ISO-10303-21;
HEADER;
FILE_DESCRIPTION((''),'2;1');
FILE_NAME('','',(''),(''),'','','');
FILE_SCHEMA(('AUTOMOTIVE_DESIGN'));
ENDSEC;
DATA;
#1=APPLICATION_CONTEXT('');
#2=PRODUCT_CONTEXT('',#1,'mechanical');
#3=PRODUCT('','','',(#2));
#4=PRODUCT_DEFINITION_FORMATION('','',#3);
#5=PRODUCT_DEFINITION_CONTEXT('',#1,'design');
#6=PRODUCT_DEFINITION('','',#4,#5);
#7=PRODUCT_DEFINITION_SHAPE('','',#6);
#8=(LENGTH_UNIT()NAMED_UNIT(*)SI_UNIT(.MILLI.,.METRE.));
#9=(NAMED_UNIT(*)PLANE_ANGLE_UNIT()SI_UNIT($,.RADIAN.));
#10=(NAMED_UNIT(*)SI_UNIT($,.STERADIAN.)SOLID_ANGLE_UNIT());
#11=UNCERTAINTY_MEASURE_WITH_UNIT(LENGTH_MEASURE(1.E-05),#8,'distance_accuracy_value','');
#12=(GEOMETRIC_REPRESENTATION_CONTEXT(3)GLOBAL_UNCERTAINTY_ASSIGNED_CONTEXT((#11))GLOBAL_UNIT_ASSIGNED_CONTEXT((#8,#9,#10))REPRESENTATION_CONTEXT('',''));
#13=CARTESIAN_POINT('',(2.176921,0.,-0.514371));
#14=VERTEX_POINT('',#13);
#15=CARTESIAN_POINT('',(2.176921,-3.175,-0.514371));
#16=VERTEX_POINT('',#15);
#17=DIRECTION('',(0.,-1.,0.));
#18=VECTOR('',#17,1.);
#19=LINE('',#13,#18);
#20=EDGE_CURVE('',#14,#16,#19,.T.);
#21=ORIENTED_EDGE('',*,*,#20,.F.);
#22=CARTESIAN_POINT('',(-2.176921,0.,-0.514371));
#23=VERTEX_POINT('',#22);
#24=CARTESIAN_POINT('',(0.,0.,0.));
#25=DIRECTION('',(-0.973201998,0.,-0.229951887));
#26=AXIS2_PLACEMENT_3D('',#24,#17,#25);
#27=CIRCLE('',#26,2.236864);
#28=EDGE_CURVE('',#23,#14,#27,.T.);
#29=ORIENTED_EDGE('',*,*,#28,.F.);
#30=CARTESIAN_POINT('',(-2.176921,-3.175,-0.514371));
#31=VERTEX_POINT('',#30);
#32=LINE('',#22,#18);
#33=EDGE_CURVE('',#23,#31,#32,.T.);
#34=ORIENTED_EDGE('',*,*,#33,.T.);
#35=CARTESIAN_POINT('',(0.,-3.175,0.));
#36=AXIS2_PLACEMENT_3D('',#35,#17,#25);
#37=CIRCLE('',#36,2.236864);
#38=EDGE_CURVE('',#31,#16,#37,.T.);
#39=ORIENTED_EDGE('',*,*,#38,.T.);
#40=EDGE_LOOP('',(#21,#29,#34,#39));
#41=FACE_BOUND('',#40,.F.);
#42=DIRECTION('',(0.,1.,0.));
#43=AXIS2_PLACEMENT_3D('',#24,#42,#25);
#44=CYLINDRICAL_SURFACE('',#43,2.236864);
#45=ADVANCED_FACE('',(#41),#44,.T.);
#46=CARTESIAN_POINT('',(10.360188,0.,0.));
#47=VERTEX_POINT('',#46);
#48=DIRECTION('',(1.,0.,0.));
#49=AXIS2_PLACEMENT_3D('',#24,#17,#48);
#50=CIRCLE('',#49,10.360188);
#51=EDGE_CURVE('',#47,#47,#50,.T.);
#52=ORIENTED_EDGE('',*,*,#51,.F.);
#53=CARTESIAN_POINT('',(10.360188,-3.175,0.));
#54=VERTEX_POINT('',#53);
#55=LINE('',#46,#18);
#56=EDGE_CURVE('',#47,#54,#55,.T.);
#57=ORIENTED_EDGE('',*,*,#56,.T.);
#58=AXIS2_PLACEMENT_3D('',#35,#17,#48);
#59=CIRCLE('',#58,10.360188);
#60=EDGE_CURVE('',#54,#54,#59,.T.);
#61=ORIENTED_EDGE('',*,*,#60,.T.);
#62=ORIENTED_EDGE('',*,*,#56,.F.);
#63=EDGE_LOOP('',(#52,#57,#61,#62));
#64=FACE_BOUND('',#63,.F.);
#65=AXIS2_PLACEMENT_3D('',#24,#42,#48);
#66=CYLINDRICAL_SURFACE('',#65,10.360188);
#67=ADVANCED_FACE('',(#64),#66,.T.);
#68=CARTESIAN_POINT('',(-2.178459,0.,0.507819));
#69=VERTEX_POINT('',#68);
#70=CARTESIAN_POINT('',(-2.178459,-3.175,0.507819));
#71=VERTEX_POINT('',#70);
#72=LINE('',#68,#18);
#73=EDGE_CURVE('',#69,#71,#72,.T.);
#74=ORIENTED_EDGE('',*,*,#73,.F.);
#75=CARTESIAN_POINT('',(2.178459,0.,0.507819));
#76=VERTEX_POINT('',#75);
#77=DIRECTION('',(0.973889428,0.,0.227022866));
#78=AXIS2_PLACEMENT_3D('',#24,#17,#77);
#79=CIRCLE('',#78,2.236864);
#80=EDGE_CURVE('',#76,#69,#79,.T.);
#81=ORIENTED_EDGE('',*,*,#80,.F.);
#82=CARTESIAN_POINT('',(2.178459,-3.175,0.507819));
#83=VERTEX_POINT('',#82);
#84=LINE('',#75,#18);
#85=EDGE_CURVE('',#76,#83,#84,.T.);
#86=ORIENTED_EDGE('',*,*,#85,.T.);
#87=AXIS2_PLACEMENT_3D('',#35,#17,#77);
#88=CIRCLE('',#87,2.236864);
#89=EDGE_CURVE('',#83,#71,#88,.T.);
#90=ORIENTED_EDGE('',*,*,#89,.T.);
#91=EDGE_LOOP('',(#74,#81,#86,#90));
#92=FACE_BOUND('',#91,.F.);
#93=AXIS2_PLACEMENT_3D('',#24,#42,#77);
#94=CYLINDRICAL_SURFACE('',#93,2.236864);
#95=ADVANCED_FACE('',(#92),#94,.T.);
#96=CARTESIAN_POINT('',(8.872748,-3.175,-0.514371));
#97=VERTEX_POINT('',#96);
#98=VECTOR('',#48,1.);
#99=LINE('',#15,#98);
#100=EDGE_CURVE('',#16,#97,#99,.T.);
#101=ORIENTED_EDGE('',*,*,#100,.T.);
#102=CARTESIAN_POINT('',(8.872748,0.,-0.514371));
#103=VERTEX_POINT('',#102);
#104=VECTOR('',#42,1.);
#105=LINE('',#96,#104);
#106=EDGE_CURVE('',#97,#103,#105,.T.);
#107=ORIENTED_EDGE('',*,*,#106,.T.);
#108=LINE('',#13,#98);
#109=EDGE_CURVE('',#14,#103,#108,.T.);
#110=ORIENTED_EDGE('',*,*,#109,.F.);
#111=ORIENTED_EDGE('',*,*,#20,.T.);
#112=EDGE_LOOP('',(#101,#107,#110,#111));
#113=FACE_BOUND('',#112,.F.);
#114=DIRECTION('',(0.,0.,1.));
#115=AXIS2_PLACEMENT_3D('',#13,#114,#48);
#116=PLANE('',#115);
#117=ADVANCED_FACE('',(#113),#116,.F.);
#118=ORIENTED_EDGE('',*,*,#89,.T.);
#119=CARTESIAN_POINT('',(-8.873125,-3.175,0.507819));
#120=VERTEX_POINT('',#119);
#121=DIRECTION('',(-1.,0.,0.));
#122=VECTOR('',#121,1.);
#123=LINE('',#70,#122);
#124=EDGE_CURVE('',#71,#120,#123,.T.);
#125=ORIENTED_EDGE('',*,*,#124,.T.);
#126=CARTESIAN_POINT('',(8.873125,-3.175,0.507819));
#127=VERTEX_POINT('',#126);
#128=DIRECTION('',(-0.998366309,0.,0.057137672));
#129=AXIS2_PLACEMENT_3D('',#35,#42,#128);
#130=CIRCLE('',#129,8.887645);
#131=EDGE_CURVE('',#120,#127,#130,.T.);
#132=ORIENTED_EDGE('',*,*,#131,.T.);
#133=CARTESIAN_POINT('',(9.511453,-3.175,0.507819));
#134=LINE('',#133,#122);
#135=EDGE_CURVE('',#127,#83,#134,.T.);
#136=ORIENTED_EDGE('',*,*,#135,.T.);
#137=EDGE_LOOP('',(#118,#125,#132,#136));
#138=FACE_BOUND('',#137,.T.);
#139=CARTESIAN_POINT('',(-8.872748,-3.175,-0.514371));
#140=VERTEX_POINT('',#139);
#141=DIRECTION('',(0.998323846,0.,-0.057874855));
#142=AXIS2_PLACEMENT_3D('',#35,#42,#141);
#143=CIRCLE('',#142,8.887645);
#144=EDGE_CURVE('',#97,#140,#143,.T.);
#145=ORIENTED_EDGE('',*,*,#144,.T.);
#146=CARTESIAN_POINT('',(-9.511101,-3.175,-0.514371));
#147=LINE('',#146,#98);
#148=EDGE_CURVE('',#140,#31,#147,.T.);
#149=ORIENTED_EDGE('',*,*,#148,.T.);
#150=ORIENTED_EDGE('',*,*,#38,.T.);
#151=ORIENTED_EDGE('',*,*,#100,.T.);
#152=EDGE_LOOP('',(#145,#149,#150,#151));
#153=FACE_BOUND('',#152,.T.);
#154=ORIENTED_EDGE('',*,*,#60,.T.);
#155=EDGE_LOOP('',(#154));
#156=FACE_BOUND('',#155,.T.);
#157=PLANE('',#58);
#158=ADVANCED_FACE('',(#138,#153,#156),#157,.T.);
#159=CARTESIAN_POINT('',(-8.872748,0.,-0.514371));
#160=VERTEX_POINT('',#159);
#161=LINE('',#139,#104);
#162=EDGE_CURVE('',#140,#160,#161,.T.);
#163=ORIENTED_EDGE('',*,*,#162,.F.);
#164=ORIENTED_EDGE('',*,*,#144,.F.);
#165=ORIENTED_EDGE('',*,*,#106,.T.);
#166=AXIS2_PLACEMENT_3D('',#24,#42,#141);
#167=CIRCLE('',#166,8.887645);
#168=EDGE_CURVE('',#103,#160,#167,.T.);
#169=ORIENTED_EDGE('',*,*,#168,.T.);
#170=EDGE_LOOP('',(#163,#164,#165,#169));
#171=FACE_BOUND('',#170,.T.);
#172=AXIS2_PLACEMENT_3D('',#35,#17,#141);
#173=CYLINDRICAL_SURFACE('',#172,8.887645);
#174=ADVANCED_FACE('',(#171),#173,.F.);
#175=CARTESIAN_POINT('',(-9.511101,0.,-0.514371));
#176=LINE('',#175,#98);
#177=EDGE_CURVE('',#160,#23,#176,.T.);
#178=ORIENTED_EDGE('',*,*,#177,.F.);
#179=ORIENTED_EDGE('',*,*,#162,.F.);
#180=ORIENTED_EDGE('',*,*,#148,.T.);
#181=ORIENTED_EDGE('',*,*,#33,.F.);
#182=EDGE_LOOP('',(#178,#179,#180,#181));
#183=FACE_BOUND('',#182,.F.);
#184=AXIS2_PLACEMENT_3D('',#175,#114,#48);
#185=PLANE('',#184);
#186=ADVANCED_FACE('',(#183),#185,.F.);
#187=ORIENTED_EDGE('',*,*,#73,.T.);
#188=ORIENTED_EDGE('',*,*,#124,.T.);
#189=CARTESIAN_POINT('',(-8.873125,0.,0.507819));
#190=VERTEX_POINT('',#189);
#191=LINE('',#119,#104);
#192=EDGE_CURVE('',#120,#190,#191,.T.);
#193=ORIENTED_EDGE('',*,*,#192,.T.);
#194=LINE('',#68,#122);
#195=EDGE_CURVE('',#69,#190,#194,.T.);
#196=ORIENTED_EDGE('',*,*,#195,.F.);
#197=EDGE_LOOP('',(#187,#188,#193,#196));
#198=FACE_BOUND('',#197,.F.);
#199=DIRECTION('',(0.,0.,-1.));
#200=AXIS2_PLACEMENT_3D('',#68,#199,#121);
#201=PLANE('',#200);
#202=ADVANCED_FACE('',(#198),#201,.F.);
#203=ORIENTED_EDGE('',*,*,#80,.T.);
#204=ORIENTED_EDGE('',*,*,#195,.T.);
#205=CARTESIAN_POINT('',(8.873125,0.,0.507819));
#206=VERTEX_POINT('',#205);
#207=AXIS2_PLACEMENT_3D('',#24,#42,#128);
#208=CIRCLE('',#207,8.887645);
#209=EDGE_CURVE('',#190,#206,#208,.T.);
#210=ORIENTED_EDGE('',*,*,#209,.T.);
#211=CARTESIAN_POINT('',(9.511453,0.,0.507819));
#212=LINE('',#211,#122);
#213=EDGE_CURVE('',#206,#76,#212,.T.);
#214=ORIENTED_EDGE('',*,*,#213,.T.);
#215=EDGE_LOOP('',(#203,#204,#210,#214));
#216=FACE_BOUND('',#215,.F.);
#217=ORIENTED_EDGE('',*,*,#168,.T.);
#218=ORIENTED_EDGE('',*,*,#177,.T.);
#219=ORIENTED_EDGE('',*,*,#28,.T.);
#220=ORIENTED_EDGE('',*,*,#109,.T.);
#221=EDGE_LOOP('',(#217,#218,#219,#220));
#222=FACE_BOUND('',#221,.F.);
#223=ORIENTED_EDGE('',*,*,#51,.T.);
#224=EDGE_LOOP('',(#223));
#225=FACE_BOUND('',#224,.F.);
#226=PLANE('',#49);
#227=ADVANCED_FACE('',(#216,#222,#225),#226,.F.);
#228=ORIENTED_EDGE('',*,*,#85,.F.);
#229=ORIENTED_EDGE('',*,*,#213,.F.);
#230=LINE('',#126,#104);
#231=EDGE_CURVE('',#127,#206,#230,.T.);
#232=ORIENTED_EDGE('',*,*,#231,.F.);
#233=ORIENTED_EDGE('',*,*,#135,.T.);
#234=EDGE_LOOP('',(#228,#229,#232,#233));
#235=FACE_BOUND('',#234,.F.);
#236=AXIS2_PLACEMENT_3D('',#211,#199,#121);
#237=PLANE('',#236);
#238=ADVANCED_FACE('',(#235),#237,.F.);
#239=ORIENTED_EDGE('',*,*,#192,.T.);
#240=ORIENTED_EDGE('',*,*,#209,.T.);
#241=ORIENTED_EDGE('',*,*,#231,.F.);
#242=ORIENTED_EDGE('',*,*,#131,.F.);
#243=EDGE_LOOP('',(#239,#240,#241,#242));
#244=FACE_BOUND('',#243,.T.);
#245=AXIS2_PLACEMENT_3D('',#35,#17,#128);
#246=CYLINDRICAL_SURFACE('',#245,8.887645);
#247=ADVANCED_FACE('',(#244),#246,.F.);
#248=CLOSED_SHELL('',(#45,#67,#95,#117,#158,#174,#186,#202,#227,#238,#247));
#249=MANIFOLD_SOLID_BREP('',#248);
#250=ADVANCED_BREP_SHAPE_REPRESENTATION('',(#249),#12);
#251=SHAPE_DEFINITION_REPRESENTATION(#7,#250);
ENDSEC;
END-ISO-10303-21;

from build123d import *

# Parameters (mm, degrees)
F0_R     = 10.3601879012
F1_DEPTH = 3.175
F2_R     = 10.3601879012
F3_DEPTH = 3.175


with BuildPart() as f1:
    # F0 (on Front) → F1 (new body)
    with BuildSketch(Plane.XZ):
        Circle(F0_R)
        with BuildLine():
            ThreePointArc((9.5114533333, 0.5078193457), (9.521612731, 0.254), (9.525, 0))
            ThreePointArc((9.525, 0), (9.5215246826, -0.2572794566), (9.5111012664, -0.5143711699))
            ThreePointArc((9.5111012664, -0.5143711699), (0, -9.525), (-9.5111012664, -0.5143711699))
            ThreePointArc((-9.5111012664, -0.5143711699), (-9.524999435, -0.0032806383), (-9.5114533333, 0.5078193457))
            ThreePointArc((-9.5114533333, 0.5078193457), (0, 9.525), (9.5114533333, 0.5078193457))
        make_face(mode=Mode.SUBTRACT)
        with BuildLine():
            Line((-2.1784585047, 0.5078193457), (-9.5114533333, 0.5078193457))
            ThreePointArc((-9.5114533333, 0.5078193457), (-9.524999435, -0.0032806383), (-9.5111012664, -0.5143711699))
            Line((-9.5111012664, -0.5143711699), (-2.1769208171, -0.5143711699))
            ThreePointArc((-2.1769208171, -0.5143711699), (-2.2368617797, -0.0033649251), (-2.1784585047, 0.5078193457))
        make_face()
        with BuildLine():
            ThreePointArc((2.2368643107, 0), (2.222214889, 0.2555835118), (2.1784585047, 0.5078193457))
            ThreePointArc((2.1784585047, 0.5078193457), (0, 2.2368643107), (-2.1784585047, 0.5078193457))
            ThreePointArc((-2.1784585047, 0.5078193457), (-2.2368617797, -0.0033649251), (-2.1769208171, -0.5143711699))
            ThreePointArc((-2.1769208171, -0.5143711699), (0, -2.2368643107), (2.1769208171, -0.5143711699))
            ThreePointArc((2.1769208171, -0.5143711699), (2.2218278992, -0.2589261105), (2.2368643107, 0))
        make_face()
        with BuildLine():
            ThreePointArc((9.5111012664, -0.5143711699), (9.5215246826, -0.2572794566), (9.525, 0))
            ThreePointArc((9.525, 0), (9.521612731, 0.254), (9.5114533333, 0.5078193457))
            Line((9.5114533333, 0.5078193457), (2.1784585047, 0.5078193457))
            ThreePointArc((2.1784585047, 0.5078193457), (2.222214889, 0.2555835118), (2.2368643107, 0))
            ThreePointArc((2.2368643107, 0), (2.2218278992, -0.2589261105), (2.1769208171, -0.5143711699))
            Line((2.1769208171, -0.5143711699), (9.5111012664, -0.5143711699))
        make_face()
    extrude(amount=F1_DEPTH)

    # F2 (on face) → F3 (join)
    with BuildSketch(Plane.XZ.offset(3.175)):
        Circle(F2_R)
        with BuildLine():
            ThreePointArc((8.8731253784, 0.5078193457), (8.8840143878, 0.2540134389), (8.8876450463, 0))
            ThreePointArc((8.8876450463, 0), (8.8839199998, -0.2572934234), (8.872747983, -0.5143711699))
            Line((8.872747983, -0.5143711699), (9.5111012664, -0.5143711699))
            ThreePointArc((9.5111012664, -0.5143711699), (0, -9.525), (-9.5111012664, -0.5143711699))
            Line((-9.5111012664, -0.5143711699), (-8.872747983, -0.5143711699))
            ThreePointArc((-8.872747983, -0.5143711699), (-8.8876444406, -0.0032813423), (-8.8731253784, 0.5078193457))
            Line((-8.8731253784, 0.5078193457), (-9.5114533333, 0.5078193457))
            ThreePointArc((-9.5114533333, 0.5078193457), (0, 9.525), (9.5114533333, 0.5078193457))
            Line((9.5114533333, 0.5078193457), (8.8731253784, 0.5078193457))
        make_face(mode=Mode.SUBTRACT)
        with BuildLine():
            ThreePointArc((-8.8731253784, 0.5078193457), (0, 8.8876450463), (8.8731253784, 0.5078193457))
            Line((8.8731253784, 0.5078193457), (9.5114533333, 0.5078193457))
            ThreePointArc((9.5114533333, 0.5078193457), (0, 9.525), (-9.5114533333, 0.5078193457))
            Line((-9.5114533333, 0.5078193457), (-8.8731253784, 0.5078193457))
        make_face()
        with BuildLine():
            Line((9.5111012664, -0.5143711699), (8.872747983, -0.5143711699))
            ThreePointArc((8.872747983, -0.5143711699), (0, -8.8876450463), (-8.872747983, -0.5143711699))
            Line((-8.872747983, -0.5143711699), (-9.5111012664, -0.5143711699))
            ThreePointArc((-9.5111012664, -0.5143711699), (0, -9.525), (9.5111012664, -0.5143711699))
        make_face()
    extrude(amount=-F3_DEPTH)


solid = f1.part
